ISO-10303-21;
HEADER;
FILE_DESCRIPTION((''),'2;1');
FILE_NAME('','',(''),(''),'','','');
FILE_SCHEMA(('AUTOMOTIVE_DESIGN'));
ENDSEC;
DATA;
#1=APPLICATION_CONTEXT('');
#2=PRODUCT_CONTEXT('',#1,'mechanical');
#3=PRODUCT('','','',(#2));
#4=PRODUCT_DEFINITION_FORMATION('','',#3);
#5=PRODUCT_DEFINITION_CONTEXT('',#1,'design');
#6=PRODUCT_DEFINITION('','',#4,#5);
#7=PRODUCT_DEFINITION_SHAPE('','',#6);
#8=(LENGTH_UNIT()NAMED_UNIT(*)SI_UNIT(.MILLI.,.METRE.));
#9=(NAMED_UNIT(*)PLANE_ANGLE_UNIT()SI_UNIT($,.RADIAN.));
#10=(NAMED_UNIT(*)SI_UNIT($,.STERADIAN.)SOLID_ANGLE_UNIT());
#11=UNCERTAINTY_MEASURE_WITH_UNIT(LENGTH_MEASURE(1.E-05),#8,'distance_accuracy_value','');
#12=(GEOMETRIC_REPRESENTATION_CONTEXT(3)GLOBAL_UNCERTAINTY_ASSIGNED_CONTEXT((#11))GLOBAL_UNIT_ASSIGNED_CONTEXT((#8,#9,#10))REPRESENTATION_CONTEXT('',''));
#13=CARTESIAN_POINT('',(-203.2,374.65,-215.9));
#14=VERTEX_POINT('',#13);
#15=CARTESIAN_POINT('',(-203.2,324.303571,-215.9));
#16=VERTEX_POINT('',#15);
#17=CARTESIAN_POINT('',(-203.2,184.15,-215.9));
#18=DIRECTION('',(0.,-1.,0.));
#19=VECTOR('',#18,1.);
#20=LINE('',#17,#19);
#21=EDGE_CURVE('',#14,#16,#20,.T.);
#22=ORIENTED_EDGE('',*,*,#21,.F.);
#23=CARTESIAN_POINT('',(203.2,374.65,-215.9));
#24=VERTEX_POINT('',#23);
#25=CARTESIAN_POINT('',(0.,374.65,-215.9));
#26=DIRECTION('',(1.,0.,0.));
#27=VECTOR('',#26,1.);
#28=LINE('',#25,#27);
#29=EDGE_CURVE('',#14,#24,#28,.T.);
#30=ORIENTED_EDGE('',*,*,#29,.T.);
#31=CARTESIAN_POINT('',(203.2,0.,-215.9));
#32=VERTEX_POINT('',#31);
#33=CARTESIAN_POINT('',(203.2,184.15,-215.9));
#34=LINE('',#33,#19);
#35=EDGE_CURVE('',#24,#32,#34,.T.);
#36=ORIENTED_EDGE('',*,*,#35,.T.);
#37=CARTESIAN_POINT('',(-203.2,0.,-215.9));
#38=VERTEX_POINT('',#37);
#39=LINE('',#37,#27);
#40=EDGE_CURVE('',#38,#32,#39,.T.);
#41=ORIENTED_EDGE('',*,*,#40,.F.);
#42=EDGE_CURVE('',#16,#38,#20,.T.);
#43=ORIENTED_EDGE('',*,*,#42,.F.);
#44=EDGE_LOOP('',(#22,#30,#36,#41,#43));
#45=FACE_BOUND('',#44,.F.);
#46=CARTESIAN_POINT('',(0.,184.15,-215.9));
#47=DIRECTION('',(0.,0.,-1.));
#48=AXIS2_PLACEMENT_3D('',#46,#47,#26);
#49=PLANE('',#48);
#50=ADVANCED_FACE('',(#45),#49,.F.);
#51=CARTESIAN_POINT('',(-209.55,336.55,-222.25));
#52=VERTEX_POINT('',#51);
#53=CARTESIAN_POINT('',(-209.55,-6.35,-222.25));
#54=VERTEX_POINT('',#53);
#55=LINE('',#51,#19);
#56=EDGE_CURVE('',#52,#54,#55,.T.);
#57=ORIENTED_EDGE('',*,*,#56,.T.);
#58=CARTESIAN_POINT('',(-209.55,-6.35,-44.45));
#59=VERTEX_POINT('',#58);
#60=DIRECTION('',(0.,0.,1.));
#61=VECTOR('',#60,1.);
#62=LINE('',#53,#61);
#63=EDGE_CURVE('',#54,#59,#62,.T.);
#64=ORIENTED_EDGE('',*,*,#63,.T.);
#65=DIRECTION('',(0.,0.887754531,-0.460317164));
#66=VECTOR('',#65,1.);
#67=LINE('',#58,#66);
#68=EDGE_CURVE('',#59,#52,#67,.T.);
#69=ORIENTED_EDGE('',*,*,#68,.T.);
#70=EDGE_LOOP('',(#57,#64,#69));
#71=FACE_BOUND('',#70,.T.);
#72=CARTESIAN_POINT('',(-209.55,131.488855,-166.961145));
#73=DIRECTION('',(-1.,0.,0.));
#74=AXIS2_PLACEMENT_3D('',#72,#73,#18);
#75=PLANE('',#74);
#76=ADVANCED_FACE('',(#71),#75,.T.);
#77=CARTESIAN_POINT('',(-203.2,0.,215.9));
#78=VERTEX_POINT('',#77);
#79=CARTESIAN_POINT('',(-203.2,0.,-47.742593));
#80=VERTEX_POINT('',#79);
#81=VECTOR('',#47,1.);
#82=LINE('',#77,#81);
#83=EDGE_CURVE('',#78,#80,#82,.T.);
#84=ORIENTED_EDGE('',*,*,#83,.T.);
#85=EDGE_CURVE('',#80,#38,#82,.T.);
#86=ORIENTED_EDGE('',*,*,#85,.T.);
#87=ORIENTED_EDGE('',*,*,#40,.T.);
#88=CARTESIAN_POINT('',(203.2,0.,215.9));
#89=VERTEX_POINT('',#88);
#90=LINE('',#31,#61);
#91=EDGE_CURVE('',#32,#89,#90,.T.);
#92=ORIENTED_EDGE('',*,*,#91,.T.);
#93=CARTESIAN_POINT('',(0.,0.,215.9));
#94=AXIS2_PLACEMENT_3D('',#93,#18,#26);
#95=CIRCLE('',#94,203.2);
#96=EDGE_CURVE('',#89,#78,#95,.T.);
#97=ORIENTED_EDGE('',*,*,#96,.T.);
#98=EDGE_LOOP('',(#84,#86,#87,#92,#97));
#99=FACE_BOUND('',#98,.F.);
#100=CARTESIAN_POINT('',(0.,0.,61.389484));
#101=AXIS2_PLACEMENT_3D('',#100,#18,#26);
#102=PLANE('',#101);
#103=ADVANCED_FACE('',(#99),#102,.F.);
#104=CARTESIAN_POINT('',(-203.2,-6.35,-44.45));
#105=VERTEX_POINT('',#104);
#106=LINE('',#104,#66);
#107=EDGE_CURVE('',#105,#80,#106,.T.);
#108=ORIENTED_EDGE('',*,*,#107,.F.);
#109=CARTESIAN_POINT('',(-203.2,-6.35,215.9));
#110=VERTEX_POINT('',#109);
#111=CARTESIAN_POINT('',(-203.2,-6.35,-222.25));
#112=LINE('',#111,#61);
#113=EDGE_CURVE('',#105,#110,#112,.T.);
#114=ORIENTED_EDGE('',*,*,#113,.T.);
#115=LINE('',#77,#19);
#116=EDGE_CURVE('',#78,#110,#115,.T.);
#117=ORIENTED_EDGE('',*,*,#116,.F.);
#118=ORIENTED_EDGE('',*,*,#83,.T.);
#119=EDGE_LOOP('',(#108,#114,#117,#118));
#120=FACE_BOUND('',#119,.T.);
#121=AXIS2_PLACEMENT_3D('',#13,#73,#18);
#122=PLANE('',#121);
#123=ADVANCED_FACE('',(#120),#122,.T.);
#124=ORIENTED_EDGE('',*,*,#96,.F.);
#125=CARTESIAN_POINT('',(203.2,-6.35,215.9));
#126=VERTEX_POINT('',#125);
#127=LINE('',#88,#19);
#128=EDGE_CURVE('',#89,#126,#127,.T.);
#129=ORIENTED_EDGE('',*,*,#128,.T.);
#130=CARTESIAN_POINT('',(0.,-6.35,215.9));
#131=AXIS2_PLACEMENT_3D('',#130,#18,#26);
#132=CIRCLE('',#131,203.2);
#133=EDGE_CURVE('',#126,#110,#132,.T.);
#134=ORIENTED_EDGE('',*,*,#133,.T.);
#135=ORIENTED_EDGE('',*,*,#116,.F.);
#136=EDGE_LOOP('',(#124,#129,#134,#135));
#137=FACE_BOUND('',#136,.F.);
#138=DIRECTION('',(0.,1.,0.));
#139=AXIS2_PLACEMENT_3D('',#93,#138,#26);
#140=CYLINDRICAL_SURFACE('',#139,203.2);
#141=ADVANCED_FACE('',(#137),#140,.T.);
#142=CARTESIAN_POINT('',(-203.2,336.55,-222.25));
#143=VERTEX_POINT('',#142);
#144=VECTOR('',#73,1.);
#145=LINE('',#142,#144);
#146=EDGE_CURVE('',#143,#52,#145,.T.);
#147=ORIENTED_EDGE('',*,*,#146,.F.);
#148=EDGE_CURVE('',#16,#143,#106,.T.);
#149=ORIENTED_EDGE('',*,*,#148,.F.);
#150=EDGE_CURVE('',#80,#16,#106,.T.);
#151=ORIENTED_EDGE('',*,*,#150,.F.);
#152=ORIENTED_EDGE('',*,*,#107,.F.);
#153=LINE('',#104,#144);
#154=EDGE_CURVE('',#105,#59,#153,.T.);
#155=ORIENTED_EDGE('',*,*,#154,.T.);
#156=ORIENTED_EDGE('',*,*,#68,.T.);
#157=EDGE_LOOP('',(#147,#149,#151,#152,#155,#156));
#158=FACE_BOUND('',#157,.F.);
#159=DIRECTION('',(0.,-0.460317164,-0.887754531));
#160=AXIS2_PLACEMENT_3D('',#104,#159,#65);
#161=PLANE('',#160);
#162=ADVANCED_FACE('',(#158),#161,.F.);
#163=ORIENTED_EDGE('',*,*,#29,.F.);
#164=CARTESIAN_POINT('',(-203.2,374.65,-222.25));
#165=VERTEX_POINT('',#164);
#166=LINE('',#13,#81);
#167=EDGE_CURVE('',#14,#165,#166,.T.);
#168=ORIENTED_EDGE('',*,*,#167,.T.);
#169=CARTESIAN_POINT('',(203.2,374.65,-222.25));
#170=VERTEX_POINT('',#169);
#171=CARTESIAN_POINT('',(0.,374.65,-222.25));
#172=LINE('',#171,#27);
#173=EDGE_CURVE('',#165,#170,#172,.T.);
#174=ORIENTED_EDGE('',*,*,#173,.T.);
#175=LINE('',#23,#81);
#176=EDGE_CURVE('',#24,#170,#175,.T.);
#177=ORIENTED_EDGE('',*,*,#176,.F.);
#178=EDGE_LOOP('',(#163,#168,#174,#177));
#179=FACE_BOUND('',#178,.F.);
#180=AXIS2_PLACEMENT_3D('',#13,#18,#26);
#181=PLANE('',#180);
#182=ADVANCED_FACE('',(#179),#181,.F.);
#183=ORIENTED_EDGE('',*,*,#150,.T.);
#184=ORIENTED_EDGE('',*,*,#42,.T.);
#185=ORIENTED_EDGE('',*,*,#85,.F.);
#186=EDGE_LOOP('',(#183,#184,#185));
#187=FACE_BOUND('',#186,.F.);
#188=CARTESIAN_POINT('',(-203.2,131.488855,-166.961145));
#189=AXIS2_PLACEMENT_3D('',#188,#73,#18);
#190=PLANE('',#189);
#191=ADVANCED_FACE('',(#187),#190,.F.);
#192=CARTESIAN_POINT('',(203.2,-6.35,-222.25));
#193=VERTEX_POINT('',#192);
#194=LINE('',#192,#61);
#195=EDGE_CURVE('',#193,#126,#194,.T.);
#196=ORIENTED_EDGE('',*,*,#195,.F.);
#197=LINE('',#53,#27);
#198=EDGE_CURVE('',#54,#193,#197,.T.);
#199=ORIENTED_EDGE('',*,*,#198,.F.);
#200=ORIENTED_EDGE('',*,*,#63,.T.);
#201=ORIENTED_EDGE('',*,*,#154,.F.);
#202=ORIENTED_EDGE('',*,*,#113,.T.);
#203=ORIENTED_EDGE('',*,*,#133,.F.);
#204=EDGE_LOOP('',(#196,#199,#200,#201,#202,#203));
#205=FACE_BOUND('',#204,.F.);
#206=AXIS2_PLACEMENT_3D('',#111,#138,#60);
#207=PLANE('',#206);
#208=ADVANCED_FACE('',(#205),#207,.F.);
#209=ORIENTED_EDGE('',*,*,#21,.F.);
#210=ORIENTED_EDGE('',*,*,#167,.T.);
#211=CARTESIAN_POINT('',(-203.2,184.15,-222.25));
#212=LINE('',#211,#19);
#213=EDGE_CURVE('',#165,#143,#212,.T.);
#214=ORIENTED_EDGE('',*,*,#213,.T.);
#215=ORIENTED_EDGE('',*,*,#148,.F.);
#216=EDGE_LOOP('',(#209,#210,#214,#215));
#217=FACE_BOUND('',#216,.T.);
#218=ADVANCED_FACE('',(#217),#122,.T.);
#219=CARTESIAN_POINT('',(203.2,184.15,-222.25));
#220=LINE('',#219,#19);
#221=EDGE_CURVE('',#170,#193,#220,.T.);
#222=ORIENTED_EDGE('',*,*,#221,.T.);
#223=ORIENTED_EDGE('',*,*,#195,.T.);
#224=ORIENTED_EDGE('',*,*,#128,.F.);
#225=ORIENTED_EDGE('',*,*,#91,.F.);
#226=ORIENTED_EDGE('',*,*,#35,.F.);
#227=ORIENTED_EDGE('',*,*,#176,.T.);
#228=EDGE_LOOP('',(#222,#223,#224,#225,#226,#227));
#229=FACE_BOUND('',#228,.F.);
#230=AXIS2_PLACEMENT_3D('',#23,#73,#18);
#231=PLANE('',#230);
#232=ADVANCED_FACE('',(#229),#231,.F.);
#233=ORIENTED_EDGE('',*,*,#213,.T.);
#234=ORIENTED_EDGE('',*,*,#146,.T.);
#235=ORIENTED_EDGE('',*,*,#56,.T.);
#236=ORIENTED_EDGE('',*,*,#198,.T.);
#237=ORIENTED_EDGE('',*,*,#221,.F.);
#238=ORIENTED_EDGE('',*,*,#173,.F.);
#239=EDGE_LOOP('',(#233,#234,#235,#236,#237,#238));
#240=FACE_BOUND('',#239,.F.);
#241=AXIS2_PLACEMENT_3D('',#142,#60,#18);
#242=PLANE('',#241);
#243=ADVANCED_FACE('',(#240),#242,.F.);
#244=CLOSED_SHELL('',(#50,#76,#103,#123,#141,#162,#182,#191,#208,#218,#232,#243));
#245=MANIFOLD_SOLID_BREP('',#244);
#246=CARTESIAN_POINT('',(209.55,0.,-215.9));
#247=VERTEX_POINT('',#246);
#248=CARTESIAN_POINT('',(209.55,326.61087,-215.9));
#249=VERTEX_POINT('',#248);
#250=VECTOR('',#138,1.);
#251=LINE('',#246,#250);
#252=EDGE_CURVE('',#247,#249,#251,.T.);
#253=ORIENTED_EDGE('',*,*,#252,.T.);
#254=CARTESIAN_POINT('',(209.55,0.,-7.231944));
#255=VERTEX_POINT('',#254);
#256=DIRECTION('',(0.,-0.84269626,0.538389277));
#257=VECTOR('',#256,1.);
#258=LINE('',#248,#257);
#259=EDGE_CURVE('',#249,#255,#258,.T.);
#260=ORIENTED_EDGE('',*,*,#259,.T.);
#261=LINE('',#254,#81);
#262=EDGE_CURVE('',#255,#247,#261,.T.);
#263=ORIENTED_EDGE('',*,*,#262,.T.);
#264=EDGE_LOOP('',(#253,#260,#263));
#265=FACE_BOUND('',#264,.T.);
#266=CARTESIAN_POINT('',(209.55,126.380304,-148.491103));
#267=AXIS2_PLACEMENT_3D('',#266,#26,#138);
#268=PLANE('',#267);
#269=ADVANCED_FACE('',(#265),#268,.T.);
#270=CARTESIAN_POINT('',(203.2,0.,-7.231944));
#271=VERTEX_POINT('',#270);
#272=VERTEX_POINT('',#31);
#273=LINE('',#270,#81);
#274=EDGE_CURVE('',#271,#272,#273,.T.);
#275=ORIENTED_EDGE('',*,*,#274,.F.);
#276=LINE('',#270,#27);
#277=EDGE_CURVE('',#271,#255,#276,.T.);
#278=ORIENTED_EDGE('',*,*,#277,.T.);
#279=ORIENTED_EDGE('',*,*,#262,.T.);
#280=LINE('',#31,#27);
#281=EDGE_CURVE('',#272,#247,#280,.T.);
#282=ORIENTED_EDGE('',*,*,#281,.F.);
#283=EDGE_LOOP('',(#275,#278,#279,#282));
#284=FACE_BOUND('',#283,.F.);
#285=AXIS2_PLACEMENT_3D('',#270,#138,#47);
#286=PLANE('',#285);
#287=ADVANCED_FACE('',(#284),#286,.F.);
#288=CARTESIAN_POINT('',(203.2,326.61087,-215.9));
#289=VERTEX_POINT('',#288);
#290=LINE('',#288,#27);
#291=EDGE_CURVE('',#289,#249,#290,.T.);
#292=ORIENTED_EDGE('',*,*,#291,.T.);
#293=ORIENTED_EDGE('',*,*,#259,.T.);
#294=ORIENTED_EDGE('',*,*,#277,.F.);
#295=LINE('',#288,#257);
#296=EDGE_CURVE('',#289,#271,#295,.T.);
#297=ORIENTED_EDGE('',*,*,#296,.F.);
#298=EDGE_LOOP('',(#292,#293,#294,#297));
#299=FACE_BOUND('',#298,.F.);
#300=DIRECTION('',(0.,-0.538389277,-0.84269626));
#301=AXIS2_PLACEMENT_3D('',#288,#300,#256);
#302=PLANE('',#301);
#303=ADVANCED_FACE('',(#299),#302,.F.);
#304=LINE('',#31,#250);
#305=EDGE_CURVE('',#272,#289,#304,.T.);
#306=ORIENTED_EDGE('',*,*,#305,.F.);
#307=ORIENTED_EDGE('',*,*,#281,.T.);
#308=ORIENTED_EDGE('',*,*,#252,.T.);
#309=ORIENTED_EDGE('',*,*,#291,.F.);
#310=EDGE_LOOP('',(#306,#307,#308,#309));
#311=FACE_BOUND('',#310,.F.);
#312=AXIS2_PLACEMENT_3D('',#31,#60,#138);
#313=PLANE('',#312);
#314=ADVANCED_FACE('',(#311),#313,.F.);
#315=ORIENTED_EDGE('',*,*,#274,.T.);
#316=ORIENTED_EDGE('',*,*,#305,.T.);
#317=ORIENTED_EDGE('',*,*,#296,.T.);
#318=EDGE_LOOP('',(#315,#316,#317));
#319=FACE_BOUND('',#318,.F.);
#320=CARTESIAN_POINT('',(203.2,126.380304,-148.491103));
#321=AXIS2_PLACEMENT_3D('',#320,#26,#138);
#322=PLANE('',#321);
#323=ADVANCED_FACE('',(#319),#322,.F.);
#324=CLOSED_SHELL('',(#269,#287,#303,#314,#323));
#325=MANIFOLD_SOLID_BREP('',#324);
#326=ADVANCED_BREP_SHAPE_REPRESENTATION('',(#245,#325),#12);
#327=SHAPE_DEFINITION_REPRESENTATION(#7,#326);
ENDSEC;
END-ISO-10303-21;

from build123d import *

# Parameters (mm, degrees)
F1_DEPTH = 6.35
F3_W     = 406.4
F3_H     = 381
F4_DEPTH = 6.35
F7_DEPTH = 6.35
F9_DEPTH = 6.35


# Not quite as in the source:
# - a feature names something its author has since deleted; it is built from what else it names


with BuildPart() as f1:
    # F0 (on Front) → F1 (new body)
    with BuildSketch(Plane.XZ):
        with BuildLine():
            Line((-203.2, 215.9), (-203.2, -215.9))
            Line((-203.2, -215.9), (203.2, -215.9))
            Line((203.2, -215.9), (203.2, 215.9))
            ThreePointArc((203.2, 215.9), (0, 419.1), (-203.2, 215.9))
        make_face()
    extrude(amount=F1_DEPTH)

    # F3 (on offset) → F4 (join)
    with BuildSketch(Plane(origin=(0, 0, -215.9), x_dir=(1, 0, 0), z_dir=(0, 0, -1))):
        with Locations((0, -184.15)):
            Rectangle(F3_W, F3_H)
    extrude(amount=F4_DEPTH)

    # F6 (on offset) → F7 (join)
    with BuildSketch(Plane(origin=(-203.2, 0, 0), x_dir=(0, -1, 0), z_dir=(-1, 0, 0))):
        Polygon((6.35, -44.45), (-336.55, -222.25), (6.35, -222.25), align=None)
    extrude(amount=F7_DEPTH)


with BuildPart() as f9:
    # F8 (on face) → F9 (new body)
    with BuildSketch(Plane.YZ.offset(203.2)):
        Polygon((0, -215.9), (326.6108695652, -215.9), (0, -7.2319444444), align=None)
    extrude(amount=F9_DEPTH)


solid = Compound([f1.part, f9.part])
